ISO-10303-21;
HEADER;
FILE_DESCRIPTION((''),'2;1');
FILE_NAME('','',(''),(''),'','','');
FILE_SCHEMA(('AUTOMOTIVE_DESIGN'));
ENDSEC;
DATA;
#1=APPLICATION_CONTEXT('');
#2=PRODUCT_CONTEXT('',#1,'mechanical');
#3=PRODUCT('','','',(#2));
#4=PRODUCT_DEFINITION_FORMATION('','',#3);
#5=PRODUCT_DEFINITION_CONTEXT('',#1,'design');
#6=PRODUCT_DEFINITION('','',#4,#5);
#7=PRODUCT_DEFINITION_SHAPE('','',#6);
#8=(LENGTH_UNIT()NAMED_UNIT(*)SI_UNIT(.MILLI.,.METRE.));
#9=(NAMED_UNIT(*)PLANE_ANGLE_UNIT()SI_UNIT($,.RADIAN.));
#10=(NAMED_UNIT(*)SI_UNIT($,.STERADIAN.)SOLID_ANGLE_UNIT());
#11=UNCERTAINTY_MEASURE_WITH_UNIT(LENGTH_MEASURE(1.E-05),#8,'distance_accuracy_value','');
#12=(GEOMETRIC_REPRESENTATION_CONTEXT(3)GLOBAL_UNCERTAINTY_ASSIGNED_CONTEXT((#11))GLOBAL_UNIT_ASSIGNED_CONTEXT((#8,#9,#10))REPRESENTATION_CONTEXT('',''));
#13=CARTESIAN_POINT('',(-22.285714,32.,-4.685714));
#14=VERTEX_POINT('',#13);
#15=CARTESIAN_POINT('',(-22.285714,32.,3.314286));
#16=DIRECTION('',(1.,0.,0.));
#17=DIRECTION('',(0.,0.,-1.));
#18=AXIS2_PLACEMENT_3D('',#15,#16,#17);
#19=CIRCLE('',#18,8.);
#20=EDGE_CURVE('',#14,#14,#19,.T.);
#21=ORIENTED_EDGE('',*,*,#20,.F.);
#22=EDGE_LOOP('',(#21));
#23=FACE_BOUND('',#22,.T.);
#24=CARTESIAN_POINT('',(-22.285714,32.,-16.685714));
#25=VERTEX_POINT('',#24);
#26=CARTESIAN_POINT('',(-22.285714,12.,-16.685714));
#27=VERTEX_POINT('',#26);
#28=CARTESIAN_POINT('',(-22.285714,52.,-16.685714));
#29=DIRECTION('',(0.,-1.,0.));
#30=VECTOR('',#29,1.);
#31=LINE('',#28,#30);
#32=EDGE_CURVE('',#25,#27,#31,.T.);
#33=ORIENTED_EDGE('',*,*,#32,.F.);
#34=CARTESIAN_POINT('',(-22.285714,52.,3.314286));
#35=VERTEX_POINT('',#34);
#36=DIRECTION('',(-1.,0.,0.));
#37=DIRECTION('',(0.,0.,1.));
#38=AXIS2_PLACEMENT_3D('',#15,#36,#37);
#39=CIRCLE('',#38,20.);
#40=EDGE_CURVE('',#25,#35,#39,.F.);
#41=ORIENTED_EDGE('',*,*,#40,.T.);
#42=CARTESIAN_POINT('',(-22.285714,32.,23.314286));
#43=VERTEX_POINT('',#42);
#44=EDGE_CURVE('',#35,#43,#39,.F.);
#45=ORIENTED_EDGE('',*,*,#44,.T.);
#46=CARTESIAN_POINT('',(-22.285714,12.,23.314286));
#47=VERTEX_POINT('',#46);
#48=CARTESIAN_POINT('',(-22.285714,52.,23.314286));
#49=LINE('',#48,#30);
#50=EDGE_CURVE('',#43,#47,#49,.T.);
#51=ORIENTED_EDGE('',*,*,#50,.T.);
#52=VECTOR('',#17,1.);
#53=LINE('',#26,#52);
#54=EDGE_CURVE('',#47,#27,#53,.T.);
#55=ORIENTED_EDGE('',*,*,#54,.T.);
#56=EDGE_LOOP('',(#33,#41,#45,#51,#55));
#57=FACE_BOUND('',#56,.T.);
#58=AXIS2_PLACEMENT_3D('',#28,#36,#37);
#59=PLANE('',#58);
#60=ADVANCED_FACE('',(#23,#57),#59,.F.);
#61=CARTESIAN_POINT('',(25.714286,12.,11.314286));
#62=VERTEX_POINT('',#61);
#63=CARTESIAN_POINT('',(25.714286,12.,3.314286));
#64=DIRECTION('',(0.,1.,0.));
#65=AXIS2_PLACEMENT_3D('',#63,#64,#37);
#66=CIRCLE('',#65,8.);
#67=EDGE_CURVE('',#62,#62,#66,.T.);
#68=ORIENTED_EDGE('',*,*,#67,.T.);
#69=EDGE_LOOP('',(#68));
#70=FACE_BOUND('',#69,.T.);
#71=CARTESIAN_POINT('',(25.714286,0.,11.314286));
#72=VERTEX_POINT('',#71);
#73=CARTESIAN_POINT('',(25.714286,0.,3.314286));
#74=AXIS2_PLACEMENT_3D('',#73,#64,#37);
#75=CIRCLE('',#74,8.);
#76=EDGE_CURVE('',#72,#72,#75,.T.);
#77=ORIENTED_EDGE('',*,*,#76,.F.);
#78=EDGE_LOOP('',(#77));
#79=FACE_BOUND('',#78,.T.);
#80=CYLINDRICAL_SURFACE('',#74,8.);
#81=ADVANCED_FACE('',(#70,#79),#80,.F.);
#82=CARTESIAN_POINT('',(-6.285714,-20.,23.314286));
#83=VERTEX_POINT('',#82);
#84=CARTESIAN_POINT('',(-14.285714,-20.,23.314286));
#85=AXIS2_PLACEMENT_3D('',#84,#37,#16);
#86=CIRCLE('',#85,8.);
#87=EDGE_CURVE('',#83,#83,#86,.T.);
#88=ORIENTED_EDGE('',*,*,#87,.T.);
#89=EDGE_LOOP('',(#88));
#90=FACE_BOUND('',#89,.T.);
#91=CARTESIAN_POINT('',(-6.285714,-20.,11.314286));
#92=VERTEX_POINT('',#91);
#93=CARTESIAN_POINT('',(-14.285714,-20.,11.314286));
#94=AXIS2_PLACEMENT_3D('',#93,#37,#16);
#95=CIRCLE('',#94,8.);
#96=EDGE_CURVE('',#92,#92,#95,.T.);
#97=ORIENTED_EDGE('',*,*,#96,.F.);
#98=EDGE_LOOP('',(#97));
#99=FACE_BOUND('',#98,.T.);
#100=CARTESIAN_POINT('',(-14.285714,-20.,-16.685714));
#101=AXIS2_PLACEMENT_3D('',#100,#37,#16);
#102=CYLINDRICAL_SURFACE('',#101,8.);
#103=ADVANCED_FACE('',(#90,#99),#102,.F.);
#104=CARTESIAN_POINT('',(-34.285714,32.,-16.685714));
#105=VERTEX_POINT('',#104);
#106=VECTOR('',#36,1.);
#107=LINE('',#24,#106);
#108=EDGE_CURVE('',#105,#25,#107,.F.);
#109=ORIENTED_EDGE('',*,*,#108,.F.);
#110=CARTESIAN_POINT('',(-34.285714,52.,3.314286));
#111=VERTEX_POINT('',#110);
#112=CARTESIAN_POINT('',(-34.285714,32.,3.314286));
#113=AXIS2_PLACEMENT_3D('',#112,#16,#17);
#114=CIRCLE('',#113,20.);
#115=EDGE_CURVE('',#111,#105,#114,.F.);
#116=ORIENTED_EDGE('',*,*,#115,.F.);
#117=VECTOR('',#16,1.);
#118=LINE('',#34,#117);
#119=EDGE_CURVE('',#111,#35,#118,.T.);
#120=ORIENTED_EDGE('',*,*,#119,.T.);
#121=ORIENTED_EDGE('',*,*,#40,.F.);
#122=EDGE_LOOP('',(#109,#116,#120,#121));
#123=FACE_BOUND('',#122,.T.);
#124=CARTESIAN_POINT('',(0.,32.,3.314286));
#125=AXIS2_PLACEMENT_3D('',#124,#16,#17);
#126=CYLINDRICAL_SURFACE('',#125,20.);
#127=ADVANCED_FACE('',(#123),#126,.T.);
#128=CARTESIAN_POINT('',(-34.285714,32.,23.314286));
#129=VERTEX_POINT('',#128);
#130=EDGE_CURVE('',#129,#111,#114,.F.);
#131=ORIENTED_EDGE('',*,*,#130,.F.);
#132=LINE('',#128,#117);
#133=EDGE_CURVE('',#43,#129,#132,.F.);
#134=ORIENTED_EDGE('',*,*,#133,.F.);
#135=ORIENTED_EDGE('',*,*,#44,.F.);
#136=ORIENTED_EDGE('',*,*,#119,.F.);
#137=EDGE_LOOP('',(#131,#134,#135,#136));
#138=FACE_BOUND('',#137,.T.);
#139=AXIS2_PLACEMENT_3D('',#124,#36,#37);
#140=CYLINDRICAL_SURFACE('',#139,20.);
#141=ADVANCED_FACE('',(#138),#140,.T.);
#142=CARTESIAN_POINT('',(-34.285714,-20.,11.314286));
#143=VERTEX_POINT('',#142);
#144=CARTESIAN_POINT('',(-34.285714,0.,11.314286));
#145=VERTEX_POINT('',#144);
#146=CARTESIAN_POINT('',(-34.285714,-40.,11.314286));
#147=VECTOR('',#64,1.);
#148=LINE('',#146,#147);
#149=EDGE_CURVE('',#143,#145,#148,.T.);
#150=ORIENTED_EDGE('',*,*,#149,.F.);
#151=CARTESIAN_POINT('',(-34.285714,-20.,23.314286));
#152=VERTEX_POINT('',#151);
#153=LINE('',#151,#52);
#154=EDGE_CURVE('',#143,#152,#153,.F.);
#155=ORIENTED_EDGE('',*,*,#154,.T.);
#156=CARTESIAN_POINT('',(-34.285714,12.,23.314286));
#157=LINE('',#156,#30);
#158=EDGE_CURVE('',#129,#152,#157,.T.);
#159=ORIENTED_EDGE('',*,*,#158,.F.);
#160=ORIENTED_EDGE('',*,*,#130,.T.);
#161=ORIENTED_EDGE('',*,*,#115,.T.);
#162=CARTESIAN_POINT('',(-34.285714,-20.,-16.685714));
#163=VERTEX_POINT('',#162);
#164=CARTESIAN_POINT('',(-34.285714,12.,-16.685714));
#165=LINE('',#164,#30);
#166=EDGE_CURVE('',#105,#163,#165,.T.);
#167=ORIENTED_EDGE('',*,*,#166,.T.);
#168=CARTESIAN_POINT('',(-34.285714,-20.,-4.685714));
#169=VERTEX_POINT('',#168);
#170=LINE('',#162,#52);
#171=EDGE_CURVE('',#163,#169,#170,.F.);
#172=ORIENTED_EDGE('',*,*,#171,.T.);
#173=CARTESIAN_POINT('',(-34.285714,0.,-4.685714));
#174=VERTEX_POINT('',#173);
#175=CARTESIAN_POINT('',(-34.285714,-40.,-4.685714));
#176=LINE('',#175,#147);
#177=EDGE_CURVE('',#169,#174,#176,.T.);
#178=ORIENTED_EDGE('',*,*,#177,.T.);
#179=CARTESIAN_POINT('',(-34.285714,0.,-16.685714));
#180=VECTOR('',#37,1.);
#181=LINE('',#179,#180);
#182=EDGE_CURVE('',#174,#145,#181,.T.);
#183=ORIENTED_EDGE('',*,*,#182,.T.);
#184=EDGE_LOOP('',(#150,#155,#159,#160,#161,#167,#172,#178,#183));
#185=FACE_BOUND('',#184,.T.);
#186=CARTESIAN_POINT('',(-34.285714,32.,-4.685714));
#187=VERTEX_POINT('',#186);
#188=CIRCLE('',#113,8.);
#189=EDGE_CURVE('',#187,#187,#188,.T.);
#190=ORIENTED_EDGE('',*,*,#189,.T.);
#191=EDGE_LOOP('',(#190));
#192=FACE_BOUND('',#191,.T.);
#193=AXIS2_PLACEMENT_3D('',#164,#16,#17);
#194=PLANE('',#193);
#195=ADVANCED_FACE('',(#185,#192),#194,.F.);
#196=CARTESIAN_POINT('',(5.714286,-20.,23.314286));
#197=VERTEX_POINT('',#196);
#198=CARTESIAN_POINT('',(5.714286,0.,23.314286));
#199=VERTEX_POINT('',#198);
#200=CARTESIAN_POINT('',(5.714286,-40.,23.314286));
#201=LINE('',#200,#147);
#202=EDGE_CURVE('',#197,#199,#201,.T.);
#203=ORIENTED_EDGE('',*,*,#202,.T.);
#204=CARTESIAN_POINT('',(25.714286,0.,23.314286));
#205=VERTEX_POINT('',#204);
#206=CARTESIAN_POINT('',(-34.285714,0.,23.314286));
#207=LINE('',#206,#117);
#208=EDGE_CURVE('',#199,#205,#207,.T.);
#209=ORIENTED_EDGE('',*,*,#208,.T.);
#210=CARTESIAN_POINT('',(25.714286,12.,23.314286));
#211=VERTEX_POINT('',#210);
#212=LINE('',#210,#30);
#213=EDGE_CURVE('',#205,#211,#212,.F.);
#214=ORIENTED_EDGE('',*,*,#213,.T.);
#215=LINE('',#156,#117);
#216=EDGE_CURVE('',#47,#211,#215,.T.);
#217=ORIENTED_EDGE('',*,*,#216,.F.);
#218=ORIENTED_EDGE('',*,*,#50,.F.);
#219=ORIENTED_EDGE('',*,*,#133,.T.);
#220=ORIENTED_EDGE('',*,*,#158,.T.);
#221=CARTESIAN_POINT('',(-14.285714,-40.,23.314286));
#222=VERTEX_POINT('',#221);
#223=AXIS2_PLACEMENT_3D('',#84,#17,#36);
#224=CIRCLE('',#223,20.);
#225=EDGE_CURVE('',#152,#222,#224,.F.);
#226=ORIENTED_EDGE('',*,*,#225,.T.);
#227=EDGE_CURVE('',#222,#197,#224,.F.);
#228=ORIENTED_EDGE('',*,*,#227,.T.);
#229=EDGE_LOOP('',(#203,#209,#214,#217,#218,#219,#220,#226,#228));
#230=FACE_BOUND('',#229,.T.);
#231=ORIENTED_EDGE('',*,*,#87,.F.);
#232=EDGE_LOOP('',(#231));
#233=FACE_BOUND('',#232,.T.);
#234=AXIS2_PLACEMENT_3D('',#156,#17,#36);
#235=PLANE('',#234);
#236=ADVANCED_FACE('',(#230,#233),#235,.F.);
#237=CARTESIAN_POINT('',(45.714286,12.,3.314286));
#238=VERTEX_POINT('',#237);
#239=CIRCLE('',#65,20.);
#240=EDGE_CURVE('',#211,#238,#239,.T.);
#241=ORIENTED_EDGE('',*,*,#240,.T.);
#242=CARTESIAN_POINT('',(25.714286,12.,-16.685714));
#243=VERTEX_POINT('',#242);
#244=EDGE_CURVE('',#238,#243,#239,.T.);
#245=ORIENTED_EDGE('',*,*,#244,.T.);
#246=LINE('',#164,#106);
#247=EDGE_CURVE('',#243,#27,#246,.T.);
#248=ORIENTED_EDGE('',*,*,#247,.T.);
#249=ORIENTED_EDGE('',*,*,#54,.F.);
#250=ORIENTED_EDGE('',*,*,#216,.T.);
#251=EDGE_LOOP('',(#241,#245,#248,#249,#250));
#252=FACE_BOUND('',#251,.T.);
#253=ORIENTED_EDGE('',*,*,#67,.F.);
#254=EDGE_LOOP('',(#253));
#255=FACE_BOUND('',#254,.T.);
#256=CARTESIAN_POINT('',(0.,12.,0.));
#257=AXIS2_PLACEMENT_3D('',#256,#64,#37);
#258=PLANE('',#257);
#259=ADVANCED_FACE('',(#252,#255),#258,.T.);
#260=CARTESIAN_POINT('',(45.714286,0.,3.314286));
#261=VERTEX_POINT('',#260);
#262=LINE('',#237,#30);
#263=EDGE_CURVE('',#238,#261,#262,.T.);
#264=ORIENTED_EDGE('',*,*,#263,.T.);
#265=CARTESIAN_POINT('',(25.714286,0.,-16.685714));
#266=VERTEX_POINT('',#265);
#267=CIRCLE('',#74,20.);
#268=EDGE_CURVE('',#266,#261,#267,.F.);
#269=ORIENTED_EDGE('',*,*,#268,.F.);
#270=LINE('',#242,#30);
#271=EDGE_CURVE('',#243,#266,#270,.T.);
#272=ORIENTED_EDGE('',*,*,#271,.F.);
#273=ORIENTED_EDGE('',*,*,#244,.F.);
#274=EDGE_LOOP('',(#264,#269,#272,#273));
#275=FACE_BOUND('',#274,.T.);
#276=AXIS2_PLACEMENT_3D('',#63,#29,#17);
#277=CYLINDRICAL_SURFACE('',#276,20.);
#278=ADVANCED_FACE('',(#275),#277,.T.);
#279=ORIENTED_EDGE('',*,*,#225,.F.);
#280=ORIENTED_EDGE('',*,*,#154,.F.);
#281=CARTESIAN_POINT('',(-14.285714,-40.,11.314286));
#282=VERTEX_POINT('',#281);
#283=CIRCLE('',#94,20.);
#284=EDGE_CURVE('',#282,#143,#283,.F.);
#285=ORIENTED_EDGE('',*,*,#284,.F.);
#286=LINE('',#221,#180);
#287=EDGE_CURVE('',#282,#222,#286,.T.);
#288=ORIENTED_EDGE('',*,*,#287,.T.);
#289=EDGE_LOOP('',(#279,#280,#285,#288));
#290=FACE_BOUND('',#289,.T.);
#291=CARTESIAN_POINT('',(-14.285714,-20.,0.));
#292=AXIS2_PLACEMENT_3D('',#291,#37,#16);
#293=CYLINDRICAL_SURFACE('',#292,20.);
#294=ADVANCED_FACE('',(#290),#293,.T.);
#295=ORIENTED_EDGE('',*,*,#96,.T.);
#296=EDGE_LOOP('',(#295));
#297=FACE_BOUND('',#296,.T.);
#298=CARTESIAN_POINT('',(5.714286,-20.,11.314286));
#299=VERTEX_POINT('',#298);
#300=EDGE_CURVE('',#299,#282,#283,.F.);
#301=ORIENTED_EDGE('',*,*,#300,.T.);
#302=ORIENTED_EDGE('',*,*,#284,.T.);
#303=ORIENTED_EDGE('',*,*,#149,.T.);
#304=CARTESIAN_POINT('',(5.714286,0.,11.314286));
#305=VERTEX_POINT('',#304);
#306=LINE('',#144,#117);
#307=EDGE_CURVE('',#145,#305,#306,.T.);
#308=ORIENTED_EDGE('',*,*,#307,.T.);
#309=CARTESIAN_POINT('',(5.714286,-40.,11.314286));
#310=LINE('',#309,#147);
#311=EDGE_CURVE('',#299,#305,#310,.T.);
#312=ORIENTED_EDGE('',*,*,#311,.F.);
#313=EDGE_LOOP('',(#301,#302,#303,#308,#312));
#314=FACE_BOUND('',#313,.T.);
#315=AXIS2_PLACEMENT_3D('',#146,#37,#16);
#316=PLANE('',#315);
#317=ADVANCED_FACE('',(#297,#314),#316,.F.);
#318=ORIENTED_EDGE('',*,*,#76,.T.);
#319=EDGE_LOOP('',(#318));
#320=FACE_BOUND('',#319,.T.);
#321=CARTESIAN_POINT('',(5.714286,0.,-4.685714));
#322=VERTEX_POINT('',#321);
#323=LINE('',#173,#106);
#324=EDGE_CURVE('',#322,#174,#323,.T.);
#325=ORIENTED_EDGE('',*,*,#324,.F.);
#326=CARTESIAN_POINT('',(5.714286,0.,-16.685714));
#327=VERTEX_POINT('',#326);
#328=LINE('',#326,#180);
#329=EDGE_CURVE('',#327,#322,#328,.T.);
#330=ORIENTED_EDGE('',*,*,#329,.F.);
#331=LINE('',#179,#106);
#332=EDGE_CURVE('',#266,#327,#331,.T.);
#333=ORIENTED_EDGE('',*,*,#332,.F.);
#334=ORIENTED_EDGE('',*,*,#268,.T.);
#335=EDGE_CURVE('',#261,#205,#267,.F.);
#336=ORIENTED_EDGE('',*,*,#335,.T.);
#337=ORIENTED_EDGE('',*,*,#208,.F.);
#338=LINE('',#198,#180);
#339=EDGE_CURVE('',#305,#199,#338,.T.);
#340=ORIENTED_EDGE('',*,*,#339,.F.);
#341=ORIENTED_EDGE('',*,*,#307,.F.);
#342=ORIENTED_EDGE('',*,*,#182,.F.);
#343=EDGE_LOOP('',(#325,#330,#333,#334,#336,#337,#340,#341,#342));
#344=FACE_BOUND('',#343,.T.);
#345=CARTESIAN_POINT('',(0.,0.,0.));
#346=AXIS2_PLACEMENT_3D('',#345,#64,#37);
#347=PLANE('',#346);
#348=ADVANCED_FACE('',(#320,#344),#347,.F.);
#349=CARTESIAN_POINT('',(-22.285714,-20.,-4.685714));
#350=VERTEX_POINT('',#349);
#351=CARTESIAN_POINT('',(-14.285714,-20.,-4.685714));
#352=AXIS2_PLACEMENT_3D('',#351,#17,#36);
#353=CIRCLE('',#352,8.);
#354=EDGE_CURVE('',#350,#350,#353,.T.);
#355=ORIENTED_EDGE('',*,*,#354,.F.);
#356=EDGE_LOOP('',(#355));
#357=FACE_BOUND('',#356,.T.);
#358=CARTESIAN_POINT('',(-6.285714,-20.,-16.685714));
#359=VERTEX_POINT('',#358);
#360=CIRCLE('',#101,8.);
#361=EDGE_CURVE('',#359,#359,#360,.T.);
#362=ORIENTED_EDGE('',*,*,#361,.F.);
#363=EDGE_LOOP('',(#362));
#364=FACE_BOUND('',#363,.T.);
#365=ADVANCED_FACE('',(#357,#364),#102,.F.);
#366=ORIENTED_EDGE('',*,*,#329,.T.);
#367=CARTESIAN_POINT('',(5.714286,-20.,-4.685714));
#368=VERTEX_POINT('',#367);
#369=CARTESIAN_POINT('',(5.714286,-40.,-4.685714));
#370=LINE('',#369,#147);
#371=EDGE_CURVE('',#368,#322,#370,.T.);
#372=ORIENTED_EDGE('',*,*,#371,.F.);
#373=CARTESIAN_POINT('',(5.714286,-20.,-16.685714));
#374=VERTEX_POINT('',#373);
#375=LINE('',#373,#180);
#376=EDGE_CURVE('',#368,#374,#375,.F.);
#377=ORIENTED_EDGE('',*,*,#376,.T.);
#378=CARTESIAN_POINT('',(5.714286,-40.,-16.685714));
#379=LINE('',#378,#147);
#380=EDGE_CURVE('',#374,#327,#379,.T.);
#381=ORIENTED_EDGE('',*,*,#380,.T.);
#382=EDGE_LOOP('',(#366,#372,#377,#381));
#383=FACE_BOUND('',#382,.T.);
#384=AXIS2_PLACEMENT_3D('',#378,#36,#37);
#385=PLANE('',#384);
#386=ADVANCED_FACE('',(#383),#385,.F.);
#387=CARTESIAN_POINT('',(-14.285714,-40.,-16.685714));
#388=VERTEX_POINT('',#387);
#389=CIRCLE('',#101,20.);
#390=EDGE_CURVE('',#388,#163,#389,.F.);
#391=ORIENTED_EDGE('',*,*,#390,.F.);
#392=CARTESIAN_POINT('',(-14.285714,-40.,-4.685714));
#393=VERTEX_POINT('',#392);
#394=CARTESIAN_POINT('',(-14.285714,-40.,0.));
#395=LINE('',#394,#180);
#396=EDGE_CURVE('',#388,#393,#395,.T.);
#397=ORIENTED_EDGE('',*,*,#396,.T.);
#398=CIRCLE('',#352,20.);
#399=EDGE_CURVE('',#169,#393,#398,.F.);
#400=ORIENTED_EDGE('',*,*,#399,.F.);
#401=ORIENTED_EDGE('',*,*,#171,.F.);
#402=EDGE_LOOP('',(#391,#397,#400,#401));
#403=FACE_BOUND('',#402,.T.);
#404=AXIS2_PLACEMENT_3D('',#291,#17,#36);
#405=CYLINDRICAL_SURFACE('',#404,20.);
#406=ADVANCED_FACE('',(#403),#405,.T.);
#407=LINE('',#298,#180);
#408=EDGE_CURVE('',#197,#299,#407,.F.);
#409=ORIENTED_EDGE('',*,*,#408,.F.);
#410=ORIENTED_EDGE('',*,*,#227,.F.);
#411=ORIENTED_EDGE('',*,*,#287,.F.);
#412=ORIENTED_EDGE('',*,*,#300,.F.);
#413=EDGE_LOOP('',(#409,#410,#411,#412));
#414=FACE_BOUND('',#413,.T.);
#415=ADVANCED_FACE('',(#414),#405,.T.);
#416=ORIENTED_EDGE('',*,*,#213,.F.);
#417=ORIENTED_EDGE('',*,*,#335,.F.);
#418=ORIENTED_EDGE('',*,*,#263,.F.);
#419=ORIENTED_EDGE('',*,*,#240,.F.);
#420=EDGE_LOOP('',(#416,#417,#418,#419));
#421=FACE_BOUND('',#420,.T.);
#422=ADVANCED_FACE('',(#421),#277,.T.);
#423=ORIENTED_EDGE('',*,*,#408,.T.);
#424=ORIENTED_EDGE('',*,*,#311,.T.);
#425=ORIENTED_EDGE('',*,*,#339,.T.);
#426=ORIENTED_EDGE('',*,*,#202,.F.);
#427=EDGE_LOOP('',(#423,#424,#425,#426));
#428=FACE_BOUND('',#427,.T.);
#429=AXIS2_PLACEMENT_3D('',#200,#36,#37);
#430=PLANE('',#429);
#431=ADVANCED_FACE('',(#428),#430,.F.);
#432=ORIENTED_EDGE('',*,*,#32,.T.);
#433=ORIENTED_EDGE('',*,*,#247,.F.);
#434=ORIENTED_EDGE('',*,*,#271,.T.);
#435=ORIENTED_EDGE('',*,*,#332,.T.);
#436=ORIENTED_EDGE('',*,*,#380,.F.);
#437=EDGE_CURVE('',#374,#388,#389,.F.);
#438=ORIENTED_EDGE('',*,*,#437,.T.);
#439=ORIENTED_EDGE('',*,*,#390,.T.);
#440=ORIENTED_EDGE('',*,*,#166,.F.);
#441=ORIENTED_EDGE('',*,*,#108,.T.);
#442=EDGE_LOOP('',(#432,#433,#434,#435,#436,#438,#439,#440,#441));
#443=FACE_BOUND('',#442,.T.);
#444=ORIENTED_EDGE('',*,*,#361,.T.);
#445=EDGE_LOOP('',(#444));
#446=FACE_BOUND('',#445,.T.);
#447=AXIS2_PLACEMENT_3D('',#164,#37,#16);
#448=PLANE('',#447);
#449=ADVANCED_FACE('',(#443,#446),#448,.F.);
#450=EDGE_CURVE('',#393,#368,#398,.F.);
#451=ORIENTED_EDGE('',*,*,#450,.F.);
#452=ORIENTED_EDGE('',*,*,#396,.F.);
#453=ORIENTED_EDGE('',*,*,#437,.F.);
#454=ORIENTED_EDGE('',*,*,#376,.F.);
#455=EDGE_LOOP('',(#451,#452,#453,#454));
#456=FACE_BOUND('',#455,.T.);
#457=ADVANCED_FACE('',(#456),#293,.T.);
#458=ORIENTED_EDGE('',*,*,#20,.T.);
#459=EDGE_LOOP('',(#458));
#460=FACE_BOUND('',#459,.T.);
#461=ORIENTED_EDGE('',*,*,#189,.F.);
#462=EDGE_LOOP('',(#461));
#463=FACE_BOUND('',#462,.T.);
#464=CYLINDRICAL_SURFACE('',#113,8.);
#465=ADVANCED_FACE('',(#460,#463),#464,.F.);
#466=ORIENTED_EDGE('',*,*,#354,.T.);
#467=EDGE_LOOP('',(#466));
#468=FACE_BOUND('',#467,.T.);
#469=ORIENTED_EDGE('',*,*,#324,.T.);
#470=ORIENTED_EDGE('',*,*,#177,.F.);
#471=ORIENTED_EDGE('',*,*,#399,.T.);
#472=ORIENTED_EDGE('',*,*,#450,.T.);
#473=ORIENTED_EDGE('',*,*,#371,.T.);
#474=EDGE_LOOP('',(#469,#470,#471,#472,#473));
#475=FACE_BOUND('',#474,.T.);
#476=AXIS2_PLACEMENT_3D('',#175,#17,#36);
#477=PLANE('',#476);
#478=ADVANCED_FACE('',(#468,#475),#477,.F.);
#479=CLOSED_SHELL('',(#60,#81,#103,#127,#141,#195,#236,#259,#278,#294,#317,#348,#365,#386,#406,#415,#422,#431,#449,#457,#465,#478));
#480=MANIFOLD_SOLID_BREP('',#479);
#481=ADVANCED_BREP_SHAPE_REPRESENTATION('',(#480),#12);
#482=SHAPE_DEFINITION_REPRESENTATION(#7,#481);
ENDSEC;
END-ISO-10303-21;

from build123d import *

# Parameters (mm, degrees)
SKETCH1_W           = 80
SKETCH1_H           = 40
BOSS_EXTRUDE1_DEPTH = 12
SKETCH2_W           = 12
SKETCH2_H           = 40
BOSS_EXTRUDE2_DEPTH = 40
SKETCH3_W           = 40
SKETCH3_H           = 12
BOSS_EXTRUDE3_DEPTH = 40
FILLET1_R           = 20
SKETCH4_R           = 8
CUT_EXTRUDE1_DEPTH  = 12
SKETCH5_R           = 8
CUT_EXTRUDE2_DEPTH  = 12
SKETCH6_R           = 8
CUT_EXTRUDE3_DEPTH  = 80.961215088


with BuildPart() as part:
    # Sketch1 → Boss-Extrude1 (new body)
    with BuildSketch(Plane(origin=(0, 0, 0), x_dir=(1, 0, 0), z_dir=(0, 1, 0))):
        with Locations((5.714285714, -3.314285714)):
            Rectangle(SKETCH1_W, SKETCH1_H)
    extrude(amount=BOSS_EXTRUDE1_DEPTH)

    # Sketch2 → Boss-Extrude2 (add)
    with BuildSketch(Plane(origin=(0, 12, 0), x_dir=(1, 0, 0), z_dir=(0, 1, 0))):
        with Locations((-28.285714286, -3.314285714)):
            Rectangle(SKETCH2_W, SKETCH2_H)
    extrude(amount=BOSS_EXTRUDE2_DEPTH)

    # Sketch3 → Boss-Extrude3 (add)
    with BuildSketch(Plane.XZ):
        with Locations((-14.285714286, 17.314285714)):
            Rectangle(SKETCH3_W, SKETCH3_H)
        with Locations((-14.285714286, -10.685714286)):
            Rectangle(SKETCH3_W, SKETCH3_H)
    extrude(amount=BOSS_EXTRUDE3_DEPTH)

    # Fillet1
    fillet1_edges = [part.edges().sort_by_distance(p)[0] for p in [
        (-34.285714286, -40, -10.685714286),
        (-34.285714286, -40, 17.314285714),
        (5.714285714, -40, -10.685714286),
        (5.714285714, -40, 17.314285714),
        (45.714285714, 6, -16.685714286),
        (45.714285714, 6, 23.314285714),
        (-28.285714286, 52, -16.685714286),
        (-28.285714286, 52, 23.314285714),
    ]]
    fillet(fillet1_edges, radius=FILLET1_R - 0.0001)  # a hair under: the kernel refuses the full size

    # Sketch4 → Cut-Extrude1 (cut)
    with BuildSketch(Plane(origin=(-22.285714286, 0, 0), x_dir=(0, 0, -1), z_dir=(1, 0, 0))):
        with Locations((-3.314285714, 32)):
            Circle(SKETCH4_R)
    extrude(amount=-CUT_EXTRUDE1_DEPTH, mode=Mode.SUBTRACT)

    # Sketch5 → Cut-Extrude2 (cut)
    with BuildSketch(Plane(origin=(0, 12, 0), x_dir=(1, 0, 0), z_dir=(0, 1, 0))):
        with Locations(Location((25.714285714, -3.314285714, 0), (0, 0, 270))):
            Circle(SKETCH5_R)
    extrude(amount=-CUT_EXTRUDE2_DEPTH, mode=Mode.SUBTRACT)

    # Sketch6 → Cut-Extrude3 (cut, through all)
    with BuildSketch(Plane.XY.offset(23.314285714)):
        with Locations((-14.285714286, -20)):
            Circle(SKETCH6_R)
    extrude(amount=-CUT_EXTRUDE3_DEPTH, mode=Mode.SUBTRACT)


solid = part.part
